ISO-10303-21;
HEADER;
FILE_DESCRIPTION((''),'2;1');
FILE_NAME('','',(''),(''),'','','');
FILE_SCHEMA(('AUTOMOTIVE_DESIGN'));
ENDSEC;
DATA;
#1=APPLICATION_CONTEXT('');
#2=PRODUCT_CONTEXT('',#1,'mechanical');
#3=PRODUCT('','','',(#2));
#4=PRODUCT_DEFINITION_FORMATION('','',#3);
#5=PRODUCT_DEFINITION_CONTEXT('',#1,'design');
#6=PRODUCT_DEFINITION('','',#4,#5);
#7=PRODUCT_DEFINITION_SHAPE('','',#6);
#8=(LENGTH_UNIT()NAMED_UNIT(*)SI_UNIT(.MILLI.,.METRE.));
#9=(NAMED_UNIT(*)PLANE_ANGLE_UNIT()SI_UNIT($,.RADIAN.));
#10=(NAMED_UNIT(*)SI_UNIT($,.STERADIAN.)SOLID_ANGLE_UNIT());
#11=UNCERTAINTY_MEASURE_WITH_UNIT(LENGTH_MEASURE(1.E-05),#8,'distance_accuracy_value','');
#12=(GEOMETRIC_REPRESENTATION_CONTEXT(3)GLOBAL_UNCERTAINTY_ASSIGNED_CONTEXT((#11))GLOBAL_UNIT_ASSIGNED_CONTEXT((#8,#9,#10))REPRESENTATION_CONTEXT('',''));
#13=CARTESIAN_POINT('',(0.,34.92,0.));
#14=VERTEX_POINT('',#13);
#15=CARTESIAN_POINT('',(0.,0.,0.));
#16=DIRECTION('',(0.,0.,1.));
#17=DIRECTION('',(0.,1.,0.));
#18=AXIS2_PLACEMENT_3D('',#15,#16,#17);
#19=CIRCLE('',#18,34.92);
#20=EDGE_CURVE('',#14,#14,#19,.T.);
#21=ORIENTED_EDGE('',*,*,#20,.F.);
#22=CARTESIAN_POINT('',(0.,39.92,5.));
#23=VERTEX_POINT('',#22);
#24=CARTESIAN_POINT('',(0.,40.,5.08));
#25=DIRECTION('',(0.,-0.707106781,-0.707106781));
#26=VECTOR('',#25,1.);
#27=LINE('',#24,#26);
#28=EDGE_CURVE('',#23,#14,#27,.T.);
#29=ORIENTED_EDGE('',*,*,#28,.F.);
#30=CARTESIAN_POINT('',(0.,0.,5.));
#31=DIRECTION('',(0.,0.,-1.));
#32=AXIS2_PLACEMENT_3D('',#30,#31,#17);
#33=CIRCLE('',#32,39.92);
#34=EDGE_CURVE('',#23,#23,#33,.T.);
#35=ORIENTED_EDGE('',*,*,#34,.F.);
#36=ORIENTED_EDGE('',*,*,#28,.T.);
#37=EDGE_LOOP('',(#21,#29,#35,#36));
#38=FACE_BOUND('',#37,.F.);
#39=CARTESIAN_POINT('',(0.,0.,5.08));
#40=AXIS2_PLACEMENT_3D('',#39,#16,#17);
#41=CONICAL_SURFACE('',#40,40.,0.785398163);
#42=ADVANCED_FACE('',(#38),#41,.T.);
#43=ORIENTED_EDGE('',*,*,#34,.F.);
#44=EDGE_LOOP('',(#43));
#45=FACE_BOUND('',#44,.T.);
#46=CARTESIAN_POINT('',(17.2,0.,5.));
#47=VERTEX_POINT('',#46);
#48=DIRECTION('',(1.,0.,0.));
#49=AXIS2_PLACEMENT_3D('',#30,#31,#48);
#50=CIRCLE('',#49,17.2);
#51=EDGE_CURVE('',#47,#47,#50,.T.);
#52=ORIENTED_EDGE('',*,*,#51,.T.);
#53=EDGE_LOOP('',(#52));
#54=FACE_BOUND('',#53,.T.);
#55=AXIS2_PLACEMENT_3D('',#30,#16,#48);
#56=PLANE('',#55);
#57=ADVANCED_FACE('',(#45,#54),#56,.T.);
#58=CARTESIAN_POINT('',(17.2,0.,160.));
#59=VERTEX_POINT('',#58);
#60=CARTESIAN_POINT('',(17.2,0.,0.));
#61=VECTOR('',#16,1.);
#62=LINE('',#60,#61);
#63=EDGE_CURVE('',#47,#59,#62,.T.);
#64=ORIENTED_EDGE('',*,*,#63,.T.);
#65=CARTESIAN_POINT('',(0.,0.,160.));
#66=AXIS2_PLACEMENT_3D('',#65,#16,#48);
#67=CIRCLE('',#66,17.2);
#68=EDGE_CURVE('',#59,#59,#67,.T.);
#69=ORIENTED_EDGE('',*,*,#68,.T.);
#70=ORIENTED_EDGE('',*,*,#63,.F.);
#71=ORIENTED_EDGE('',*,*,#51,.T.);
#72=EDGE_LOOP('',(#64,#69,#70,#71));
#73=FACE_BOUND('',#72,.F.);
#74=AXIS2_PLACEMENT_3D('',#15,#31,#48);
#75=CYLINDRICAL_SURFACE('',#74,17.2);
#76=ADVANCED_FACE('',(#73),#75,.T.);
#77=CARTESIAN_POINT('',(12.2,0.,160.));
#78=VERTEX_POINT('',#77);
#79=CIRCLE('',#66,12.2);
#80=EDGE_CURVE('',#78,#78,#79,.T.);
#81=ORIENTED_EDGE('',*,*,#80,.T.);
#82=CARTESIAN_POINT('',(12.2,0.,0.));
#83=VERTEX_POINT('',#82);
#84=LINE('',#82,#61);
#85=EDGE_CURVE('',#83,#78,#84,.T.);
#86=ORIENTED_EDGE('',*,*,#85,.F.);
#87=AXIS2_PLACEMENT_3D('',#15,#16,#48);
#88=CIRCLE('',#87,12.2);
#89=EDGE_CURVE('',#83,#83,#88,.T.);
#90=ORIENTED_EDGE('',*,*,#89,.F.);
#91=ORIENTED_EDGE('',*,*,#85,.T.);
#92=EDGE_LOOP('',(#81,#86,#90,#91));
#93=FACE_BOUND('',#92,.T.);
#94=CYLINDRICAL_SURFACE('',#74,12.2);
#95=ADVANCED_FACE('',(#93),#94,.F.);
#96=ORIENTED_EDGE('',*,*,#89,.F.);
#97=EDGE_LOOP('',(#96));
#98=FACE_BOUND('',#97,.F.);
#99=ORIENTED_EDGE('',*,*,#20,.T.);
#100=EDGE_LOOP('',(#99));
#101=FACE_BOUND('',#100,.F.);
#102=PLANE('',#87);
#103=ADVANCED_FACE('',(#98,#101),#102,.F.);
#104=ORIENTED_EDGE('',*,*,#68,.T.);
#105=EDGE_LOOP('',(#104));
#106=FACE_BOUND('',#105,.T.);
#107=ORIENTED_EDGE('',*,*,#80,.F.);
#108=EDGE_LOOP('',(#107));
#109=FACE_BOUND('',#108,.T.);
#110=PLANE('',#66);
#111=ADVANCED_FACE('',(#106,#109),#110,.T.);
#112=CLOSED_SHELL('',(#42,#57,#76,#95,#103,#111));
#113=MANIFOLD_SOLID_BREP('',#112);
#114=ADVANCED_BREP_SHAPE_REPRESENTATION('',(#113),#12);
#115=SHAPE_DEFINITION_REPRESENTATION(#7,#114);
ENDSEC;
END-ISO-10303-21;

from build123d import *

# Parameters (mm, degrees)
F3_DEPTH = 5
F1_R     = 17.2
F4_DEPTH = 160
F0_R     = 12.2
F5_DEPTH = 160


# Not quite as in the source:
# - a fillet or chamfer that OpenCascade refuses, or shapes differently, is made with other operations: its cross-section is extruded or revolved along the edge and cut away or added


with BuildPart() as f3:
    # F2 (on Top) → F3 (new body)
    with BuildSketch(Plane.XY):
        with BuildLine():
            ThreePointArc((40, 0), (28.2842712475, 28.2842712475), (0, 40))
            ThreePointArc((0, 40), (-28.2842712475, 28.2842712475), (-40, 0))
            ThreePointArc((-40, 0), (-28.2842712475, -28.2842712475), (0, -40))
            ThreePointArc((0, -40), (28.2842712475, -28.2842712475), (40, 0))
        make_face()
    extrude(amount=F3_DEPTH)

    # F1 (on Top) → F4 (join)
    with BuildSketch(Plane.XY):
        Circle(F1_R)
    extrude(amount=F4_DEPTH)

    # F0 (on Top) → F5 (cut)
    with BuildSketch(Plane.XY):
        Circle(F0_R)
    extrude(amount=F5_DEPTH, mode=Mode.SUBTRACT)

    # F6: chamfer of 5.08 on 1 edges, made by hand

    # F6_s1 → F6_t2 (revolve, cut)
    with BuildSketch(Plane.YZ):
        Polygon((40, 5.08), (34.92, 0), (40, 0), align=None)
    revolve(axis=Axis((0, 0, 0), (0, 0, 1)), mode=Mode.SUBTRACT)


solid = f3.part
